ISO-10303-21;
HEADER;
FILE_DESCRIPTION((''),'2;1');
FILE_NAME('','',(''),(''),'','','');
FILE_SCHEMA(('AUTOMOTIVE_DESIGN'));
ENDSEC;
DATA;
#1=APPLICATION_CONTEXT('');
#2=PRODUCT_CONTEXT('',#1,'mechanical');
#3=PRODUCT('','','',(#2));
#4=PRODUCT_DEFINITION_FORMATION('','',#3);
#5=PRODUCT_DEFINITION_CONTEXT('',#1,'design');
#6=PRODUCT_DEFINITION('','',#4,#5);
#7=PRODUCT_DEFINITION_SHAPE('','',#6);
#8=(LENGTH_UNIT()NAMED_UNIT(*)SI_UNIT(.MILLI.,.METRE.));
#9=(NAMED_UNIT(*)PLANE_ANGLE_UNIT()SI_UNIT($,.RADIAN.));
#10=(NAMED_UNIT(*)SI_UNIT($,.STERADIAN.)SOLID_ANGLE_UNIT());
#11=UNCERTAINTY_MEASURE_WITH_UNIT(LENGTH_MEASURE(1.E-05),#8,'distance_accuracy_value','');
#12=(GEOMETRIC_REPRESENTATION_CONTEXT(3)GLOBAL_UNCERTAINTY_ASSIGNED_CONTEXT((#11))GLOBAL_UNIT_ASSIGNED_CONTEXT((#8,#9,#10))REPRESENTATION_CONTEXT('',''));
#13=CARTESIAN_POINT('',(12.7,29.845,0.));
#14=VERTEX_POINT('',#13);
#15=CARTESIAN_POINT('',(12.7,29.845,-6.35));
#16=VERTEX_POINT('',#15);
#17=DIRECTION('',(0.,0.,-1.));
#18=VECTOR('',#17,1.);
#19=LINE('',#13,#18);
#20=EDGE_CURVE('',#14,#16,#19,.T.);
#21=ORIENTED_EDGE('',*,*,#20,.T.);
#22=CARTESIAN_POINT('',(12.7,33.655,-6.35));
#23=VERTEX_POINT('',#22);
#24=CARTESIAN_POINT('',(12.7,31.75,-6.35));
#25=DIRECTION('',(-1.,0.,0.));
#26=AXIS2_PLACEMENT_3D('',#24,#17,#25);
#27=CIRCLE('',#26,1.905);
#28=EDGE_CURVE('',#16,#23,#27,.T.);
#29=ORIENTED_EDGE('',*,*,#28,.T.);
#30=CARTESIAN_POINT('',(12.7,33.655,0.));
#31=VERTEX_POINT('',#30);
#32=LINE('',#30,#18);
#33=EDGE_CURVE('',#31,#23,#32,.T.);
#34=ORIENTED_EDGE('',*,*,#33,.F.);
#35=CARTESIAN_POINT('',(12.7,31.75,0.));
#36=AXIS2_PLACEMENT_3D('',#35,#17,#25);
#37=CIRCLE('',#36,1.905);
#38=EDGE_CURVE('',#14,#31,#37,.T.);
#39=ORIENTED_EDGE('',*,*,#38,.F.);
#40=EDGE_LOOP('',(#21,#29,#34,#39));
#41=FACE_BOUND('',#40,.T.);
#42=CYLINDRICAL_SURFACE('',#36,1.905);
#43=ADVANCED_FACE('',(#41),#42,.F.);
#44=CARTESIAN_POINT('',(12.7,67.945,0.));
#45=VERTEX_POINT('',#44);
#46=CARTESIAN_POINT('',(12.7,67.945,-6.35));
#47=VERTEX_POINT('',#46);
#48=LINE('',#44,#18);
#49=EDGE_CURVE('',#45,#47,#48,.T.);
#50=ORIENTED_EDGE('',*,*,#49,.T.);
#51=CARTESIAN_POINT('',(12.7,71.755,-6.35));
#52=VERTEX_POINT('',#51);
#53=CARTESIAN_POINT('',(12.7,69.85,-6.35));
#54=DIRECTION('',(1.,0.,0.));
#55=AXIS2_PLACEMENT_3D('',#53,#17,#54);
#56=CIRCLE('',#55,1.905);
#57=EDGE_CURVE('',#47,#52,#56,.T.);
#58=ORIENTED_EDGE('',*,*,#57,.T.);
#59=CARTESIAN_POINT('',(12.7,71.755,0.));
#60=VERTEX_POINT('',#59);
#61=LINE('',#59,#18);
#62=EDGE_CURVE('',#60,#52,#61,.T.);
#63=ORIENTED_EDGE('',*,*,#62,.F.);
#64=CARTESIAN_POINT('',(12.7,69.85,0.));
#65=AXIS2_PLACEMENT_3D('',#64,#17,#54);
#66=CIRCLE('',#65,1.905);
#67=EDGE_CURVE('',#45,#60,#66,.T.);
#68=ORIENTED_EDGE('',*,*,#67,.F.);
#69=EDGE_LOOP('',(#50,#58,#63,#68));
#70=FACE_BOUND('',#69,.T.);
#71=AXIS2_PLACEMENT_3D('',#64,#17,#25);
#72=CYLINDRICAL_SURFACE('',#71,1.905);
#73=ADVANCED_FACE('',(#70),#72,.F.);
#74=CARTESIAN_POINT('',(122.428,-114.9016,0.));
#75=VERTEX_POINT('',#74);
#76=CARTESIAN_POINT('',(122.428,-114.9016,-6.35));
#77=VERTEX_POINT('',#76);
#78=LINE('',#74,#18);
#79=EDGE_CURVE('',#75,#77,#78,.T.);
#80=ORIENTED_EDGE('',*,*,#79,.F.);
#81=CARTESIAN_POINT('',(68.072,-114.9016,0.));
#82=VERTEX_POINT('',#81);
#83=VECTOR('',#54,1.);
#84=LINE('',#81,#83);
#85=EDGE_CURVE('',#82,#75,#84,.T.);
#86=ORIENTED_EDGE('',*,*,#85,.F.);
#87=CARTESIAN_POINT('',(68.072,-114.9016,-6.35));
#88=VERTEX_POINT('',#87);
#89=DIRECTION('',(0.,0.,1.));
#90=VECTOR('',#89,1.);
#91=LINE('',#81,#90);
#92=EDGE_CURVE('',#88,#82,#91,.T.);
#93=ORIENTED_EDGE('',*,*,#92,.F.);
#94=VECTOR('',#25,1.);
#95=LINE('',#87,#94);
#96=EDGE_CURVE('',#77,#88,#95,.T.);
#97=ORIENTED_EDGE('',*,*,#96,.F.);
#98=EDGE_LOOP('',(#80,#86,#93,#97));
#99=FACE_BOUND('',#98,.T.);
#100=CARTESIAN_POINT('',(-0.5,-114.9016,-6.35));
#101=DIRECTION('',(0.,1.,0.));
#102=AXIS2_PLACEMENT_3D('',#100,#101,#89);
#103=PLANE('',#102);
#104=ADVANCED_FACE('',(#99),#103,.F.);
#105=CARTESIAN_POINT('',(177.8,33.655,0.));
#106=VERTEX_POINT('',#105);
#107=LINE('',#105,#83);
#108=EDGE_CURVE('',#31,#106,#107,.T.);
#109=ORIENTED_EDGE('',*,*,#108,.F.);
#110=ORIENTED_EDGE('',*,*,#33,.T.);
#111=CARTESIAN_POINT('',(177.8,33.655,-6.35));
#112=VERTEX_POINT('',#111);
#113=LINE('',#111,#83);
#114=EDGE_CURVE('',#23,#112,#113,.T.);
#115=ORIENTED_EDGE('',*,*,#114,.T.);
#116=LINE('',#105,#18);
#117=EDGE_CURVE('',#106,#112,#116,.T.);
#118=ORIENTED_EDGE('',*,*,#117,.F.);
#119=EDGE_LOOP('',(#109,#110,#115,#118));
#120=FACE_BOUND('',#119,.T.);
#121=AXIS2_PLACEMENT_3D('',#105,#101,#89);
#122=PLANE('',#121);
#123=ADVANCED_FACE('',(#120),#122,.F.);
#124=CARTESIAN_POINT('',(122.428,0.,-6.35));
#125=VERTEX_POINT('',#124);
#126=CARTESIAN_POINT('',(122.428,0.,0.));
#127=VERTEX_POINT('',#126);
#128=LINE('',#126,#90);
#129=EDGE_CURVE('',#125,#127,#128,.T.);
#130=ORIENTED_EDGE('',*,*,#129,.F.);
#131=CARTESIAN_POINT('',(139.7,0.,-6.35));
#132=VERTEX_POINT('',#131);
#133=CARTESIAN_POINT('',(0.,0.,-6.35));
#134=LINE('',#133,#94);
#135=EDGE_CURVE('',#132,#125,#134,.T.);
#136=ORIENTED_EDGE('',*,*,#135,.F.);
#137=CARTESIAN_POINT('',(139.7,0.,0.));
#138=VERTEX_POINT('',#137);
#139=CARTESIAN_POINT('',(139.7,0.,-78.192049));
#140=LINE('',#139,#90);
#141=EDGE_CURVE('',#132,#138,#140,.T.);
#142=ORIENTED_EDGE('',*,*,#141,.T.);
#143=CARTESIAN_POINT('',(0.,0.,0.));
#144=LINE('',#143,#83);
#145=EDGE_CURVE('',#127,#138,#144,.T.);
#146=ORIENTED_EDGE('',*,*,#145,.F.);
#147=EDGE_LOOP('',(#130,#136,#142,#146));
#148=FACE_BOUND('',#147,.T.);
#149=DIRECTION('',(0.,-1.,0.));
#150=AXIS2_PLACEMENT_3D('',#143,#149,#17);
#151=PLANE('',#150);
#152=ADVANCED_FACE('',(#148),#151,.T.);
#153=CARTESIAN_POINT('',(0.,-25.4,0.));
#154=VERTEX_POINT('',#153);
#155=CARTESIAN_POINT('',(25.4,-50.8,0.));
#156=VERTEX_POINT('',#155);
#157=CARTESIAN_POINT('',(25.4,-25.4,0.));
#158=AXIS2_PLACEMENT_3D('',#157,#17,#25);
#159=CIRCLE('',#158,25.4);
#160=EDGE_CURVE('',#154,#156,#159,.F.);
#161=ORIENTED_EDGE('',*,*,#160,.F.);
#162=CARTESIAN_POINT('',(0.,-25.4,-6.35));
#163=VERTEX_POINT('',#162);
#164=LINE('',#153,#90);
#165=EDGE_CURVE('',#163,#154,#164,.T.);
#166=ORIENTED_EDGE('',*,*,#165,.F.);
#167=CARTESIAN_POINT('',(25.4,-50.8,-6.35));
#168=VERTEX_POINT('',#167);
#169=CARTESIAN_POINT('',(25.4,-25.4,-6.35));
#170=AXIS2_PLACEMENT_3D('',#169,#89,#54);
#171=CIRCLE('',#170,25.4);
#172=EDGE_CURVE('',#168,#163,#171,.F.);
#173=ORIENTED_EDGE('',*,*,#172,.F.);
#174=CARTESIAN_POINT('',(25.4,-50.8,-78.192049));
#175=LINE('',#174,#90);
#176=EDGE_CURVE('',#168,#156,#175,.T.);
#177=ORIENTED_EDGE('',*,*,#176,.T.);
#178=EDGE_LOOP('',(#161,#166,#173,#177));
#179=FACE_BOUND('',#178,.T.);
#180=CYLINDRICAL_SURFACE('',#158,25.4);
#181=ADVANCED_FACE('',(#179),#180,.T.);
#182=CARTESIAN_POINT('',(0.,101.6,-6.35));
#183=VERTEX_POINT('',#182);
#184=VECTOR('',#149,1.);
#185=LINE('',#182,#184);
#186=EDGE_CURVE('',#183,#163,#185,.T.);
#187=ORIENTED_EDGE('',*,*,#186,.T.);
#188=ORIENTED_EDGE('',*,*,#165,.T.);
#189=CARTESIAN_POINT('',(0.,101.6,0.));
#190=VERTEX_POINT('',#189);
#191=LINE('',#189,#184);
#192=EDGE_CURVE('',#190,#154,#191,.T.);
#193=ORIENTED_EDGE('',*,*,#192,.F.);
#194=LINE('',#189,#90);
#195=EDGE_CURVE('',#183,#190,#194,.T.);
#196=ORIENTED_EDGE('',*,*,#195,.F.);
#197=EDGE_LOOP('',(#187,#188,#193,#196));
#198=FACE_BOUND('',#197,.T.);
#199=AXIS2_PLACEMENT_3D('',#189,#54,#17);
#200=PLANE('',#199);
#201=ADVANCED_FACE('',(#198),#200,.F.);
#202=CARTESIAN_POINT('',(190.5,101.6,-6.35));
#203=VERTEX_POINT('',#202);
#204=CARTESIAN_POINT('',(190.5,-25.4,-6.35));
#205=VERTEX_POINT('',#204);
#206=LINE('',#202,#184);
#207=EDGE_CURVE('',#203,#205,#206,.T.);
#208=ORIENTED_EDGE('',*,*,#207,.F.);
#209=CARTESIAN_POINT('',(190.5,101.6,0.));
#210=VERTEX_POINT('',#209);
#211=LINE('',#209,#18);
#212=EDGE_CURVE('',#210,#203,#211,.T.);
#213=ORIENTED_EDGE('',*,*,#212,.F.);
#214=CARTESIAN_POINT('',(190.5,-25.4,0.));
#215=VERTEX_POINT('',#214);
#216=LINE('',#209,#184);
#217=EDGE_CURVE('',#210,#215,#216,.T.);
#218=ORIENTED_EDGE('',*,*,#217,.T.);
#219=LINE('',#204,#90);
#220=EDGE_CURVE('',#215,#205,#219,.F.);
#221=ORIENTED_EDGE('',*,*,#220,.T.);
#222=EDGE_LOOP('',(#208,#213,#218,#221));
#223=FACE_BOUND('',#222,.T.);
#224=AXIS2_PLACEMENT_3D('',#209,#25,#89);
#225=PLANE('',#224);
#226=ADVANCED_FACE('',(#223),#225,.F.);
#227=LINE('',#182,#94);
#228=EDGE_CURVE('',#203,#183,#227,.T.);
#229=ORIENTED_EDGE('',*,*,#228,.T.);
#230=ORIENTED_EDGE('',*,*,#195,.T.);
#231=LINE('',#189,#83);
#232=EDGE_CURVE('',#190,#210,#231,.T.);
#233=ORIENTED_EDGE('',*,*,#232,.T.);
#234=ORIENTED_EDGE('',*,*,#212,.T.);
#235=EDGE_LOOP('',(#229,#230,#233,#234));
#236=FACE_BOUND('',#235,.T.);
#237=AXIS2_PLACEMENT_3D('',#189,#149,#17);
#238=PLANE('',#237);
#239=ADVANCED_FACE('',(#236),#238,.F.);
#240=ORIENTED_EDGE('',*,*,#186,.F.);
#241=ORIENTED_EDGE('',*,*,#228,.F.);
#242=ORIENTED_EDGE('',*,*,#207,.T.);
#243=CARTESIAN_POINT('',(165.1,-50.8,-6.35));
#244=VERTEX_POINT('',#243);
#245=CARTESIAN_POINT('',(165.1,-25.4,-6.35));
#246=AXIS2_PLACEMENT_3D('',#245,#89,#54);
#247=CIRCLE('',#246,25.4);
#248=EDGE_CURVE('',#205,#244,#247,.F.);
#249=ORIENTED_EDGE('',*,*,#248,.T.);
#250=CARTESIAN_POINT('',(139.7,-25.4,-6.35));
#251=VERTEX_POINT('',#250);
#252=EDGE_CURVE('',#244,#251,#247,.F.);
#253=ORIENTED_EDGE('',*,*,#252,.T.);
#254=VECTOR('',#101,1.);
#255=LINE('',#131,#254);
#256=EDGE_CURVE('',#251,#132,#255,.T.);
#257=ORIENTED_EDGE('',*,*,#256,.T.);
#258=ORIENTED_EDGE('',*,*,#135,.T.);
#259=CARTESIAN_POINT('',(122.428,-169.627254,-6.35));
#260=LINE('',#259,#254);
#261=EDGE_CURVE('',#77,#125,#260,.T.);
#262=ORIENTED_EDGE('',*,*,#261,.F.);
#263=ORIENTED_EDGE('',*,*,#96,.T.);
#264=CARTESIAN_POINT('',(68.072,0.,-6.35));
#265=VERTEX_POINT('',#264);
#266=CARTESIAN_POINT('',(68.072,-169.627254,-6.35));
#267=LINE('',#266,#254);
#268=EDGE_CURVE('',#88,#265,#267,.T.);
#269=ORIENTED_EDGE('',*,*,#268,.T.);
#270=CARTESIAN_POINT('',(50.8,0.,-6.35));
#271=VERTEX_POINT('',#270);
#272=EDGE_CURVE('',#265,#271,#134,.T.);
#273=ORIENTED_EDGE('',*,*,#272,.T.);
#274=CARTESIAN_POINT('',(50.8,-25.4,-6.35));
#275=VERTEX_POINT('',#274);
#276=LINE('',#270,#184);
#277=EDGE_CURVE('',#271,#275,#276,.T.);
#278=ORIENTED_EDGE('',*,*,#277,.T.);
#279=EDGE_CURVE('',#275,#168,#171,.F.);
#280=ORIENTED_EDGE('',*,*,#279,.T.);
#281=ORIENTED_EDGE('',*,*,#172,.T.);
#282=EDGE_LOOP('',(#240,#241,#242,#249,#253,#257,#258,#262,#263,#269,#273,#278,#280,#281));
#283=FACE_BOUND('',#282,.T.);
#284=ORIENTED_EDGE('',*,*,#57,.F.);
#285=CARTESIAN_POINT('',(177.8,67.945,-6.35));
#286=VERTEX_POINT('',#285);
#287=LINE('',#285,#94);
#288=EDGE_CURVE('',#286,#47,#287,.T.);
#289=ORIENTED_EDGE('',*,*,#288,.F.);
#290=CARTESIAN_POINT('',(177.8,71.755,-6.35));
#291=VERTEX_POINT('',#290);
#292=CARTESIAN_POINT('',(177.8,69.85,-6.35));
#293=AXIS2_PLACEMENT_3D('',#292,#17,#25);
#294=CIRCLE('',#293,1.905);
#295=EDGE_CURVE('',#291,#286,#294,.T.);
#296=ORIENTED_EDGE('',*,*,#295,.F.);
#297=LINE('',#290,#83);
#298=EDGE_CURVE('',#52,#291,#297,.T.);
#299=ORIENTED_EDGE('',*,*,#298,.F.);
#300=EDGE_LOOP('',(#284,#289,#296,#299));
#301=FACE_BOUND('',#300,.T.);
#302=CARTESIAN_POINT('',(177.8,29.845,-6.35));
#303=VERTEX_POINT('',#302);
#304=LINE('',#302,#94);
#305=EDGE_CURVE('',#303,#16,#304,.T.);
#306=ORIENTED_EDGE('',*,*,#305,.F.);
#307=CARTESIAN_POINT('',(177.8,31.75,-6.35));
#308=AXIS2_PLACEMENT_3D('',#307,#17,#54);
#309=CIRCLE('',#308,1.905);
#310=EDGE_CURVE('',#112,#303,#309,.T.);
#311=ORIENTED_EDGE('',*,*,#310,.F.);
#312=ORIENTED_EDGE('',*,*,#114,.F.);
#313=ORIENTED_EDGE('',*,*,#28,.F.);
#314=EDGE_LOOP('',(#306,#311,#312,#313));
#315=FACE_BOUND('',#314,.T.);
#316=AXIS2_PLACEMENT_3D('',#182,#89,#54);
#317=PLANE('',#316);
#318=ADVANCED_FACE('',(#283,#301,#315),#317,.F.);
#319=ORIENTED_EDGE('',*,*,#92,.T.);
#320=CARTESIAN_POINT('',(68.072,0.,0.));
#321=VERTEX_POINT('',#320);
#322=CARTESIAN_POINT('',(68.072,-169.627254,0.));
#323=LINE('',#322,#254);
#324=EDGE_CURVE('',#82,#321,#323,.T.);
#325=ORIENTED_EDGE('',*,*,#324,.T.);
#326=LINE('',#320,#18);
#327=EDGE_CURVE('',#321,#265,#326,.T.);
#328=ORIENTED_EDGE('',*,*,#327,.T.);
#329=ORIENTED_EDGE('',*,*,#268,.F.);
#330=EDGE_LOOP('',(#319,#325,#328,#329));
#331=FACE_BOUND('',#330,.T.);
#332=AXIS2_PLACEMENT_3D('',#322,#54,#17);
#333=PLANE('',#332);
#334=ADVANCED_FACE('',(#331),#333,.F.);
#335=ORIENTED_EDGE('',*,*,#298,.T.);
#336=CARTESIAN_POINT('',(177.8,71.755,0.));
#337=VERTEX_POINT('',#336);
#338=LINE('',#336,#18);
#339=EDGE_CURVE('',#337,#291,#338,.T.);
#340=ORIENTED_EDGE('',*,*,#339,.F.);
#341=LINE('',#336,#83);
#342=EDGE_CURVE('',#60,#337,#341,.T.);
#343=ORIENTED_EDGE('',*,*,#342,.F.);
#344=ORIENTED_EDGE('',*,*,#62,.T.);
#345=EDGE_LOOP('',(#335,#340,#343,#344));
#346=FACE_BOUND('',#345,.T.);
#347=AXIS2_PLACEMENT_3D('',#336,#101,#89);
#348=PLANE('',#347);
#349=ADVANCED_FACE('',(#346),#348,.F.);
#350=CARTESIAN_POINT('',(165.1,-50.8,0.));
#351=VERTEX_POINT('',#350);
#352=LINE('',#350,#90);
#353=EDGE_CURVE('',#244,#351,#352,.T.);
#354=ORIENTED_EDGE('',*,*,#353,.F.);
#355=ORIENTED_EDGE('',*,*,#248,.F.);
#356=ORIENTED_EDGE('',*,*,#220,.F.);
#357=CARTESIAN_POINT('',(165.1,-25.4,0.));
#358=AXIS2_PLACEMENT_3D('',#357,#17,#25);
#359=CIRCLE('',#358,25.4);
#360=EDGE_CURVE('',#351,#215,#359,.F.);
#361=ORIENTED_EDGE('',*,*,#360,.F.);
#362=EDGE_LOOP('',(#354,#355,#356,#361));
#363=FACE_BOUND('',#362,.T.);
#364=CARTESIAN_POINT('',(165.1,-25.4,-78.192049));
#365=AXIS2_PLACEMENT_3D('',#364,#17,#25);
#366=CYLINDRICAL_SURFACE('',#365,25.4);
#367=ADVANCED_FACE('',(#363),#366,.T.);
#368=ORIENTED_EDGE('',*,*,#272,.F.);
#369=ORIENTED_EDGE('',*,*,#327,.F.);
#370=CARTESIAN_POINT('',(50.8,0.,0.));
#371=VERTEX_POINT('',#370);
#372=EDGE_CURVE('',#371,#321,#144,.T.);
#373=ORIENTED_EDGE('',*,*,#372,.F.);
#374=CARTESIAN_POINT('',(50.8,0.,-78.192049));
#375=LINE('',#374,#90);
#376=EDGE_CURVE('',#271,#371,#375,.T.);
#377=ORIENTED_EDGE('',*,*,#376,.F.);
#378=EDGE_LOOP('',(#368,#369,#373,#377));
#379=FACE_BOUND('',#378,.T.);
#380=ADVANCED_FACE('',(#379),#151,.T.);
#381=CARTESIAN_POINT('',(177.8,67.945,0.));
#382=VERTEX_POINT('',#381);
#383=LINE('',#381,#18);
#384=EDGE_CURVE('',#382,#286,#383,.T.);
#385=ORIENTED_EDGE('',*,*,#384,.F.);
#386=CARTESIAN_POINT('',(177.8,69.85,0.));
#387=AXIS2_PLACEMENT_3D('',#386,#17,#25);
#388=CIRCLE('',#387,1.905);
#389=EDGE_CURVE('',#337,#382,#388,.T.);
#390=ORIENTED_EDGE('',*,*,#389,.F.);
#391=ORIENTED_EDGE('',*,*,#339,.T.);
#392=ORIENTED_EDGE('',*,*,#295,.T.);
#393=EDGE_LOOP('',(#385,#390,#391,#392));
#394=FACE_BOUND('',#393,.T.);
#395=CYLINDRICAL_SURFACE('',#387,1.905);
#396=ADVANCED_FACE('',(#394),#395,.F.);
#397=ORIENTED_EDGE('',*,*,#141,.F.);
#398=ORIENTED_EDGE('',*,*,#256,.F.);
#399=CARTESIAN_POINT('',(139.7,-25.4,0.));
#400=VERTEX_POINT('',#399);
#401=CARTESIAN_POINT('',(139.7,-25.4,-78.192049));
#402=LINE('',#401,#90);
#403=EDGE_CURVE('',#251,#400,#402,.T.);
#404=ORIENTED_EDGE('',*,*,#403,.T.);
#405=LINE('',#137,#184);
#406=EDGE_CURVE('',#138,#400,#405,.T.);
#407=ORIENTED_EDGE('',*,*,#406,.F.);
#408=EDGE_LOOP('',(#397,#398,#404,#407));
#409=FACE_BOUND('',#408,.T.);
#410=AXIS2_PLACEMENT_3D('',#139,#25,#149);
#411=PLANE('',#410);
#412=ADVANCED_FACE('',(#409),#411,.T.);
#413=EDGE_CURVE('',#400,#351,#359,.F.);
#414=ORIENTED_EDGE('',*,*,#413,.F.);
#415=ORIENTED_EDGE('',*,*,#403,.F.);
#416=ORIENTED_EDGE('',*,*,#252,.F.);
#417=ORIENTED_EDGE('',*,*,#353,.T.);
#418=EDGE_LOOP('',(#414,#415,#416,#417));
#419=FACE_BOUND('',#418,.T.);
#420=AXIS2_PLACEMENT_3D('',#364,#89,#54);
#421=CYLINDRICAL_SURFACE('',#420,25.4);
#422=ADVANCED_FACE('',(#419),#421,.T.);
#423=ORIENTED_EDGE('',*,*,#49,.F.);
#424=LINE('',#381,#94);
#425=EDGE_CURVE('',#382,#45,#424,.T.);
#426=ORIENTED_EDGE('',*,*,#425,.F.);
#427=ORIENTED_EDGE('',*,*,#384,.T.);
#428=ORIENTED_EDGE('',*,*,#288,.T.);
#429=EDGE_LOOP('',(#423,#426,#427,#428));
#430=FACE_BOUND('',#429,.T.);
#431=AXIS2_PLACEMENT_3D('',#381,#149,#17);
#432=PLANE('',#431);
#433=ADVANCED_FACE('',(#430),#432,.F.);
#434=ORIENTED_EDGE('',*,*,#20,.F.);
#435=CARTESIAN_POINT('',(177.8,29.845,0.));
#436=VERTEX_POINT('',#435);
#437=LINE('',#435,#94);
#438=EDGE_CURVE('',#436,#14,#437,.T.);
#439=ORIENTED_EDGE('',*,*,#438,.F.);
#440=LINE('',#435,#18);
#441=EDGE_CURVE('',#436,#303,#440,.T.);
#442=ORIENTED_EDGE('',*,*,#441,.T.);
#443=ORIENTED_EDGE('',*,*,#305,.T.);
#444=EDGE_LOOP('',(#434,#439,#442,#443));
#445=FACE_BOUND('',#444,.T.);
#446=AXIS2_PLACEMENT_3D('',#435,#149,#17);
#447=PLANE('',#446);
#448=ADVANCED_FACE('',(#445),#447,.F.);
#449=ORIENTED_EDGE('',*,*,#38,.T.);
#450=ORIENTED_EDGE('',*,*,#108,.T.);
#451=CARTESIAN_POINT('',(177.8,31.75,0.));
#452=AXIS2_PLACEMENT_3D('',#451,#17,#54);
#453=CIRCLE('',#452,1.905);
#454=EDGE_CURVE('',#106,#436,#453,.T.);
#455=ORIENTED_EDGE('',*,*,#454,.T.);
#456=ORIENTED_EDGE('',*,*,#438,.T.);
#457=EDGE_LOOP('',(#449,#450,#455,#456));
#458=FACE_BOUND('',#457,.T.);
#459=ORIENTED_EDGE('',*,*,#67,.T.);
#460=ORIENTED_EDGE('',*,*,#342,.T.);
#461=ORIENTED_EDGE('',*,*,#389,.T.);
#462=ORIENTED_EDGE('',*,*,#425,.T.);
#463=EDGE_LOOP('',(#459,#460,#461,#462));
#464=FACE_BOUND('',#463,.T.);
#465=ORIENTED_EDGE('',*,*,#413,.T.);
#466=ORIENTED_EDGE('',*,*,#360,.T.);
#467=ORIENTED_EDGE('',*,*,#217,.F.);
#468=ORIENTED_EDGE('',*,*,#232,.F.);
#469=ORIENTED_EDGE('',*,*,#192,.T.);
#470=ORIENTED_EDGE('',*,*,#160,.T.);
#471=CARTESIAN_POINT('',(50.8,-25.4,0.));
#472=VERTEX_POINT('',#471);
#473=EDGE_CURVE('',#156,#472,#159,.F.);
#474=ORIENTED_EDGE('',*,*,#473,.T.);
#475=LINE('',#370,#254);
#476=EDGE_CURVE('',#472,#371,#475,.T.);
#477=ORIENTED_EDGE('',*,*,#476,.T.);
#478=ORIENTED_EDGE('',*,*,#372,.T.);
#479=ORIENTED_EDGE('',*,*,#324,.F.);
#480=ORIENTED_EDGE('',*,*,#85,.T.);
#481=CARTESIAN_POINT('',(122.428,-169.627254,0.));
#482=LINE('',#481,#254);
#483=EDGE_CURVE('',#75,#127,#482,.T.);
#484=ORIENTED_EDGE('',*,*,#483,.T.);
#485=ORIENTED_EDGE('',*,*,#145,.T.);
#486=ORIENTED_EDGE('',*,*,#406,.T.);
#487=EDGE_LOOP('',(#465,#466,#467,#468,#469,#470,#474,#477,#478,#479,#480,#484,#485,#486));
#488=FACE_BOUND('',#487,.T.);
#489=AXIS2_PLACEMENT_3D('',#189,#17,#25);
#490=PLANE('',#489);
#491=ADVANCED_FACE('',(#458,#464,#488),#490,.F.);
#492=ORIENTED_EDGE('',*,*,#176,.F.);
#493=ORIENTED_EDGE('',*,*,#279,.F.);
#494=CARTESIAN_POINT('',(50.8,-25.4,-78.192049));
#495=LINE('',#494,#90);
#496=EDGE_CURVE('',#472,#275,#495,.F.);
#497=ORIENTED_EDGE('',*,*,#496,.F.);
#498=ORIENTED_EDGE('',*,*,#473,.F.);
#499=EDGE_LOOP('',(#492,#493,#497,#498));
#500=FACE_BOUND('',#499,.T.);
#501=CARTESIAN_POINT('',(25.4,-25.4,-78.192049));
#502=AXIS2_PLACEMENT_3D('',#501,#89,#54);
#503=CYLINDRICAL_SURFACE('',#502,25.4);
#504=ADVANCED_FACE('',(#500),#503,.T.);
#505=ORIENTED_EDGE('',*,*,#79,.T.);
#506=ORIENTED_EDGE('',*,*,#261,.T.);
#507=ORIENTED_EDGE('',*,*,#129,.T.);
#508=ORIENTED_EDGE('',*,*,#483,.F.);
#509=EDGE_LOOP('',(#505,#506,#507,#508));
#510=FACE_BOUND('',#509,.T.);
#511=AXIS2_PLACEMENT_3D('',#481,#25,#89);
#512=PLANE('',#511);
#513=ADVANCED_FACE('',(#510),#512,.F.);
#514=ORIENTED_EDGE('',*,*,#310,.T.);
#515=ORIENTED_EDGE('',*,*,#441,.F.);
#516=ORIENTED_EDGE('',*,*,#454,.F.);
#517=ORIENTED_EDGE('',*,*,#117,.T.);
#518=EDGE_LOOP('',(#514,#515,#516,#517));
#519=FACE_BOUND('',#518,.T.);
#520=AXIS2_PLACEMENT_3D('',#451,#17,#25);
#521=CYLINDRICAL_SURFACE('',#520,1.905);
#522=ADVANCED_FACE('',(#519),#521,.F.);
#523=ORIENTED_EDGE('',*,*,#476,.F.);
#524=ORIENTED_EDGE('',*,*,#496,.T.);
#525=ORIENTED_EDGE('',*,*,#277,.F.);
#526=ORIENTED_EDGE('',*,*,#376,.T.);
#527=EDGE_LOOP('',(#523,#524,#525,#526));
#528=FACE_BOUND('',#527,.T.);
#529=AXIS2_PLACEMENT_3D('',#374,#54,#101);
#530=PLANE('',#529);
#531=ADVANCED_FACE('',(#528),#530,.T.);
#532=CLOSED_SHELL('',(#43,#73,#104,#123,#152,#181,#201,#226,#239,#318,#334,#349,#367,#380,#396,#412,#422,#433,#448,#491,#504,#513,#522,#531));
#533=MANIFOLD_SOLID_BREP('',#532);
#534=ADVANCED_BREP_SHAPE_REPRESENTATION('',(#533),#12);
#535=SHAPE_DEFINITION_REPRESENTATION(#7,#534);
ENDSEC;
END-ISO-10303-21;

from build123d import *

# Parameters (mm, degrees)
SKETCH1_W           = 190.5
SKETCH1_H           = 6.35
BOSS_EXTRUDE1_DEPTH = 101.6
CUT_EXTRUDE1_DEPTH  = 216.993362167
SKETCH3_W           = 50.8
SKETCH3_H           = 50.8
BOSS_EXTRUDE2_DEPTH = 6.35
FILLET1_R           = 25.4
SKETCH4_W           = 54.356
SKETCH4_H           = 6.35
BOSS_EXTRUDE3_DEPTH = 114.9016


with BuildPart() as part:
    # Sketch1 → Boss-Extrude1 (new body)
    with BuildSketch(Plane(origin=(0, 0, 0), x_dir=(1, 0, 0), z_dir=(0, 1, 0))):
        with Locations((95.25, 3.175)):
            Rectangle(SKETCH1_W, SKETCH1_H)
    extrude(amount=BOSS_EXTRUDE1_DEPTH)

    # Sketch2 → Cut-Extrude1 (cut, through all)
    with BuildSketch(Plane(origin=(0, 0, -6.35), x_dir=(-1, 0, 0), z_dir=(0, 0, -1))):
        with BuildLine():
            Line((-177.8, 71.755), (-12.7, 71.755))
            ThreePointArc((-12.7, 71.755), (-10.795, 69.85), (-12.7, 67.945))
            Line((-12.7, 67.945), (-177.8, 67.945))
            ThreePointArc((-177.8, 67.945), (-179.705, 69.85), (-177.8, 71.755))
        make_face()
        with BuildLine():
            Line((-177.8, 33.655), (-12.7, 33.655))
            ThreePointArc((-12.7, 33.655), (-10.795, 31.75), (-12.7, 29.845))
            Line((-12.7, 29.845), (-177.8, 29.845))
            ThreePointArc((-177.8, 29.845), (-179.705, 31.75), (-177.8, 33.655))
        make_face()
    extrude(amount=-CUT_EXTRUDE1_DEPTH, mode=Mode.SUBTRACT)

    # Sketch3 → Boss-Extrude2 (add)
    with BuildSketch(Plane.XY):
        with Locations((25.4, -25.4)):
            Rectangle(SKETCH3_W, SKETCH3_H)
        with Locations((165.1, -25.4)):
            Rectangle(SKETCH3_W, SKETCH3_H)
    extrude(amount=-BOSS_EXTRUDE2_DEPTH)

    # Fillet1
    fillet1_edges = [part.edges().sort_by_distance(p)[0] for p in [
        (139.7, -50.8, -3.175),
        (0, -50.8, -3.175),
        (50.8, -50.8, -3.175),
        (190.5, -50.8, -3.175),
    ]]
    fillet(fillet1_edges, radius=FILLET1_R - 0.0001)  # a hair under: the kernel refuses the full size

    # Sketch4 → Boss-Extrude3 (add)
    with BuildSketch(Plane.XZ):
        with Locations((95.25, -3.175)):
            Rectangle(SKETCH4_W, SKETCH4_H)
    extrude(amount=BOSS_EXTRUDE3_DEPTH)


solid = part.part
